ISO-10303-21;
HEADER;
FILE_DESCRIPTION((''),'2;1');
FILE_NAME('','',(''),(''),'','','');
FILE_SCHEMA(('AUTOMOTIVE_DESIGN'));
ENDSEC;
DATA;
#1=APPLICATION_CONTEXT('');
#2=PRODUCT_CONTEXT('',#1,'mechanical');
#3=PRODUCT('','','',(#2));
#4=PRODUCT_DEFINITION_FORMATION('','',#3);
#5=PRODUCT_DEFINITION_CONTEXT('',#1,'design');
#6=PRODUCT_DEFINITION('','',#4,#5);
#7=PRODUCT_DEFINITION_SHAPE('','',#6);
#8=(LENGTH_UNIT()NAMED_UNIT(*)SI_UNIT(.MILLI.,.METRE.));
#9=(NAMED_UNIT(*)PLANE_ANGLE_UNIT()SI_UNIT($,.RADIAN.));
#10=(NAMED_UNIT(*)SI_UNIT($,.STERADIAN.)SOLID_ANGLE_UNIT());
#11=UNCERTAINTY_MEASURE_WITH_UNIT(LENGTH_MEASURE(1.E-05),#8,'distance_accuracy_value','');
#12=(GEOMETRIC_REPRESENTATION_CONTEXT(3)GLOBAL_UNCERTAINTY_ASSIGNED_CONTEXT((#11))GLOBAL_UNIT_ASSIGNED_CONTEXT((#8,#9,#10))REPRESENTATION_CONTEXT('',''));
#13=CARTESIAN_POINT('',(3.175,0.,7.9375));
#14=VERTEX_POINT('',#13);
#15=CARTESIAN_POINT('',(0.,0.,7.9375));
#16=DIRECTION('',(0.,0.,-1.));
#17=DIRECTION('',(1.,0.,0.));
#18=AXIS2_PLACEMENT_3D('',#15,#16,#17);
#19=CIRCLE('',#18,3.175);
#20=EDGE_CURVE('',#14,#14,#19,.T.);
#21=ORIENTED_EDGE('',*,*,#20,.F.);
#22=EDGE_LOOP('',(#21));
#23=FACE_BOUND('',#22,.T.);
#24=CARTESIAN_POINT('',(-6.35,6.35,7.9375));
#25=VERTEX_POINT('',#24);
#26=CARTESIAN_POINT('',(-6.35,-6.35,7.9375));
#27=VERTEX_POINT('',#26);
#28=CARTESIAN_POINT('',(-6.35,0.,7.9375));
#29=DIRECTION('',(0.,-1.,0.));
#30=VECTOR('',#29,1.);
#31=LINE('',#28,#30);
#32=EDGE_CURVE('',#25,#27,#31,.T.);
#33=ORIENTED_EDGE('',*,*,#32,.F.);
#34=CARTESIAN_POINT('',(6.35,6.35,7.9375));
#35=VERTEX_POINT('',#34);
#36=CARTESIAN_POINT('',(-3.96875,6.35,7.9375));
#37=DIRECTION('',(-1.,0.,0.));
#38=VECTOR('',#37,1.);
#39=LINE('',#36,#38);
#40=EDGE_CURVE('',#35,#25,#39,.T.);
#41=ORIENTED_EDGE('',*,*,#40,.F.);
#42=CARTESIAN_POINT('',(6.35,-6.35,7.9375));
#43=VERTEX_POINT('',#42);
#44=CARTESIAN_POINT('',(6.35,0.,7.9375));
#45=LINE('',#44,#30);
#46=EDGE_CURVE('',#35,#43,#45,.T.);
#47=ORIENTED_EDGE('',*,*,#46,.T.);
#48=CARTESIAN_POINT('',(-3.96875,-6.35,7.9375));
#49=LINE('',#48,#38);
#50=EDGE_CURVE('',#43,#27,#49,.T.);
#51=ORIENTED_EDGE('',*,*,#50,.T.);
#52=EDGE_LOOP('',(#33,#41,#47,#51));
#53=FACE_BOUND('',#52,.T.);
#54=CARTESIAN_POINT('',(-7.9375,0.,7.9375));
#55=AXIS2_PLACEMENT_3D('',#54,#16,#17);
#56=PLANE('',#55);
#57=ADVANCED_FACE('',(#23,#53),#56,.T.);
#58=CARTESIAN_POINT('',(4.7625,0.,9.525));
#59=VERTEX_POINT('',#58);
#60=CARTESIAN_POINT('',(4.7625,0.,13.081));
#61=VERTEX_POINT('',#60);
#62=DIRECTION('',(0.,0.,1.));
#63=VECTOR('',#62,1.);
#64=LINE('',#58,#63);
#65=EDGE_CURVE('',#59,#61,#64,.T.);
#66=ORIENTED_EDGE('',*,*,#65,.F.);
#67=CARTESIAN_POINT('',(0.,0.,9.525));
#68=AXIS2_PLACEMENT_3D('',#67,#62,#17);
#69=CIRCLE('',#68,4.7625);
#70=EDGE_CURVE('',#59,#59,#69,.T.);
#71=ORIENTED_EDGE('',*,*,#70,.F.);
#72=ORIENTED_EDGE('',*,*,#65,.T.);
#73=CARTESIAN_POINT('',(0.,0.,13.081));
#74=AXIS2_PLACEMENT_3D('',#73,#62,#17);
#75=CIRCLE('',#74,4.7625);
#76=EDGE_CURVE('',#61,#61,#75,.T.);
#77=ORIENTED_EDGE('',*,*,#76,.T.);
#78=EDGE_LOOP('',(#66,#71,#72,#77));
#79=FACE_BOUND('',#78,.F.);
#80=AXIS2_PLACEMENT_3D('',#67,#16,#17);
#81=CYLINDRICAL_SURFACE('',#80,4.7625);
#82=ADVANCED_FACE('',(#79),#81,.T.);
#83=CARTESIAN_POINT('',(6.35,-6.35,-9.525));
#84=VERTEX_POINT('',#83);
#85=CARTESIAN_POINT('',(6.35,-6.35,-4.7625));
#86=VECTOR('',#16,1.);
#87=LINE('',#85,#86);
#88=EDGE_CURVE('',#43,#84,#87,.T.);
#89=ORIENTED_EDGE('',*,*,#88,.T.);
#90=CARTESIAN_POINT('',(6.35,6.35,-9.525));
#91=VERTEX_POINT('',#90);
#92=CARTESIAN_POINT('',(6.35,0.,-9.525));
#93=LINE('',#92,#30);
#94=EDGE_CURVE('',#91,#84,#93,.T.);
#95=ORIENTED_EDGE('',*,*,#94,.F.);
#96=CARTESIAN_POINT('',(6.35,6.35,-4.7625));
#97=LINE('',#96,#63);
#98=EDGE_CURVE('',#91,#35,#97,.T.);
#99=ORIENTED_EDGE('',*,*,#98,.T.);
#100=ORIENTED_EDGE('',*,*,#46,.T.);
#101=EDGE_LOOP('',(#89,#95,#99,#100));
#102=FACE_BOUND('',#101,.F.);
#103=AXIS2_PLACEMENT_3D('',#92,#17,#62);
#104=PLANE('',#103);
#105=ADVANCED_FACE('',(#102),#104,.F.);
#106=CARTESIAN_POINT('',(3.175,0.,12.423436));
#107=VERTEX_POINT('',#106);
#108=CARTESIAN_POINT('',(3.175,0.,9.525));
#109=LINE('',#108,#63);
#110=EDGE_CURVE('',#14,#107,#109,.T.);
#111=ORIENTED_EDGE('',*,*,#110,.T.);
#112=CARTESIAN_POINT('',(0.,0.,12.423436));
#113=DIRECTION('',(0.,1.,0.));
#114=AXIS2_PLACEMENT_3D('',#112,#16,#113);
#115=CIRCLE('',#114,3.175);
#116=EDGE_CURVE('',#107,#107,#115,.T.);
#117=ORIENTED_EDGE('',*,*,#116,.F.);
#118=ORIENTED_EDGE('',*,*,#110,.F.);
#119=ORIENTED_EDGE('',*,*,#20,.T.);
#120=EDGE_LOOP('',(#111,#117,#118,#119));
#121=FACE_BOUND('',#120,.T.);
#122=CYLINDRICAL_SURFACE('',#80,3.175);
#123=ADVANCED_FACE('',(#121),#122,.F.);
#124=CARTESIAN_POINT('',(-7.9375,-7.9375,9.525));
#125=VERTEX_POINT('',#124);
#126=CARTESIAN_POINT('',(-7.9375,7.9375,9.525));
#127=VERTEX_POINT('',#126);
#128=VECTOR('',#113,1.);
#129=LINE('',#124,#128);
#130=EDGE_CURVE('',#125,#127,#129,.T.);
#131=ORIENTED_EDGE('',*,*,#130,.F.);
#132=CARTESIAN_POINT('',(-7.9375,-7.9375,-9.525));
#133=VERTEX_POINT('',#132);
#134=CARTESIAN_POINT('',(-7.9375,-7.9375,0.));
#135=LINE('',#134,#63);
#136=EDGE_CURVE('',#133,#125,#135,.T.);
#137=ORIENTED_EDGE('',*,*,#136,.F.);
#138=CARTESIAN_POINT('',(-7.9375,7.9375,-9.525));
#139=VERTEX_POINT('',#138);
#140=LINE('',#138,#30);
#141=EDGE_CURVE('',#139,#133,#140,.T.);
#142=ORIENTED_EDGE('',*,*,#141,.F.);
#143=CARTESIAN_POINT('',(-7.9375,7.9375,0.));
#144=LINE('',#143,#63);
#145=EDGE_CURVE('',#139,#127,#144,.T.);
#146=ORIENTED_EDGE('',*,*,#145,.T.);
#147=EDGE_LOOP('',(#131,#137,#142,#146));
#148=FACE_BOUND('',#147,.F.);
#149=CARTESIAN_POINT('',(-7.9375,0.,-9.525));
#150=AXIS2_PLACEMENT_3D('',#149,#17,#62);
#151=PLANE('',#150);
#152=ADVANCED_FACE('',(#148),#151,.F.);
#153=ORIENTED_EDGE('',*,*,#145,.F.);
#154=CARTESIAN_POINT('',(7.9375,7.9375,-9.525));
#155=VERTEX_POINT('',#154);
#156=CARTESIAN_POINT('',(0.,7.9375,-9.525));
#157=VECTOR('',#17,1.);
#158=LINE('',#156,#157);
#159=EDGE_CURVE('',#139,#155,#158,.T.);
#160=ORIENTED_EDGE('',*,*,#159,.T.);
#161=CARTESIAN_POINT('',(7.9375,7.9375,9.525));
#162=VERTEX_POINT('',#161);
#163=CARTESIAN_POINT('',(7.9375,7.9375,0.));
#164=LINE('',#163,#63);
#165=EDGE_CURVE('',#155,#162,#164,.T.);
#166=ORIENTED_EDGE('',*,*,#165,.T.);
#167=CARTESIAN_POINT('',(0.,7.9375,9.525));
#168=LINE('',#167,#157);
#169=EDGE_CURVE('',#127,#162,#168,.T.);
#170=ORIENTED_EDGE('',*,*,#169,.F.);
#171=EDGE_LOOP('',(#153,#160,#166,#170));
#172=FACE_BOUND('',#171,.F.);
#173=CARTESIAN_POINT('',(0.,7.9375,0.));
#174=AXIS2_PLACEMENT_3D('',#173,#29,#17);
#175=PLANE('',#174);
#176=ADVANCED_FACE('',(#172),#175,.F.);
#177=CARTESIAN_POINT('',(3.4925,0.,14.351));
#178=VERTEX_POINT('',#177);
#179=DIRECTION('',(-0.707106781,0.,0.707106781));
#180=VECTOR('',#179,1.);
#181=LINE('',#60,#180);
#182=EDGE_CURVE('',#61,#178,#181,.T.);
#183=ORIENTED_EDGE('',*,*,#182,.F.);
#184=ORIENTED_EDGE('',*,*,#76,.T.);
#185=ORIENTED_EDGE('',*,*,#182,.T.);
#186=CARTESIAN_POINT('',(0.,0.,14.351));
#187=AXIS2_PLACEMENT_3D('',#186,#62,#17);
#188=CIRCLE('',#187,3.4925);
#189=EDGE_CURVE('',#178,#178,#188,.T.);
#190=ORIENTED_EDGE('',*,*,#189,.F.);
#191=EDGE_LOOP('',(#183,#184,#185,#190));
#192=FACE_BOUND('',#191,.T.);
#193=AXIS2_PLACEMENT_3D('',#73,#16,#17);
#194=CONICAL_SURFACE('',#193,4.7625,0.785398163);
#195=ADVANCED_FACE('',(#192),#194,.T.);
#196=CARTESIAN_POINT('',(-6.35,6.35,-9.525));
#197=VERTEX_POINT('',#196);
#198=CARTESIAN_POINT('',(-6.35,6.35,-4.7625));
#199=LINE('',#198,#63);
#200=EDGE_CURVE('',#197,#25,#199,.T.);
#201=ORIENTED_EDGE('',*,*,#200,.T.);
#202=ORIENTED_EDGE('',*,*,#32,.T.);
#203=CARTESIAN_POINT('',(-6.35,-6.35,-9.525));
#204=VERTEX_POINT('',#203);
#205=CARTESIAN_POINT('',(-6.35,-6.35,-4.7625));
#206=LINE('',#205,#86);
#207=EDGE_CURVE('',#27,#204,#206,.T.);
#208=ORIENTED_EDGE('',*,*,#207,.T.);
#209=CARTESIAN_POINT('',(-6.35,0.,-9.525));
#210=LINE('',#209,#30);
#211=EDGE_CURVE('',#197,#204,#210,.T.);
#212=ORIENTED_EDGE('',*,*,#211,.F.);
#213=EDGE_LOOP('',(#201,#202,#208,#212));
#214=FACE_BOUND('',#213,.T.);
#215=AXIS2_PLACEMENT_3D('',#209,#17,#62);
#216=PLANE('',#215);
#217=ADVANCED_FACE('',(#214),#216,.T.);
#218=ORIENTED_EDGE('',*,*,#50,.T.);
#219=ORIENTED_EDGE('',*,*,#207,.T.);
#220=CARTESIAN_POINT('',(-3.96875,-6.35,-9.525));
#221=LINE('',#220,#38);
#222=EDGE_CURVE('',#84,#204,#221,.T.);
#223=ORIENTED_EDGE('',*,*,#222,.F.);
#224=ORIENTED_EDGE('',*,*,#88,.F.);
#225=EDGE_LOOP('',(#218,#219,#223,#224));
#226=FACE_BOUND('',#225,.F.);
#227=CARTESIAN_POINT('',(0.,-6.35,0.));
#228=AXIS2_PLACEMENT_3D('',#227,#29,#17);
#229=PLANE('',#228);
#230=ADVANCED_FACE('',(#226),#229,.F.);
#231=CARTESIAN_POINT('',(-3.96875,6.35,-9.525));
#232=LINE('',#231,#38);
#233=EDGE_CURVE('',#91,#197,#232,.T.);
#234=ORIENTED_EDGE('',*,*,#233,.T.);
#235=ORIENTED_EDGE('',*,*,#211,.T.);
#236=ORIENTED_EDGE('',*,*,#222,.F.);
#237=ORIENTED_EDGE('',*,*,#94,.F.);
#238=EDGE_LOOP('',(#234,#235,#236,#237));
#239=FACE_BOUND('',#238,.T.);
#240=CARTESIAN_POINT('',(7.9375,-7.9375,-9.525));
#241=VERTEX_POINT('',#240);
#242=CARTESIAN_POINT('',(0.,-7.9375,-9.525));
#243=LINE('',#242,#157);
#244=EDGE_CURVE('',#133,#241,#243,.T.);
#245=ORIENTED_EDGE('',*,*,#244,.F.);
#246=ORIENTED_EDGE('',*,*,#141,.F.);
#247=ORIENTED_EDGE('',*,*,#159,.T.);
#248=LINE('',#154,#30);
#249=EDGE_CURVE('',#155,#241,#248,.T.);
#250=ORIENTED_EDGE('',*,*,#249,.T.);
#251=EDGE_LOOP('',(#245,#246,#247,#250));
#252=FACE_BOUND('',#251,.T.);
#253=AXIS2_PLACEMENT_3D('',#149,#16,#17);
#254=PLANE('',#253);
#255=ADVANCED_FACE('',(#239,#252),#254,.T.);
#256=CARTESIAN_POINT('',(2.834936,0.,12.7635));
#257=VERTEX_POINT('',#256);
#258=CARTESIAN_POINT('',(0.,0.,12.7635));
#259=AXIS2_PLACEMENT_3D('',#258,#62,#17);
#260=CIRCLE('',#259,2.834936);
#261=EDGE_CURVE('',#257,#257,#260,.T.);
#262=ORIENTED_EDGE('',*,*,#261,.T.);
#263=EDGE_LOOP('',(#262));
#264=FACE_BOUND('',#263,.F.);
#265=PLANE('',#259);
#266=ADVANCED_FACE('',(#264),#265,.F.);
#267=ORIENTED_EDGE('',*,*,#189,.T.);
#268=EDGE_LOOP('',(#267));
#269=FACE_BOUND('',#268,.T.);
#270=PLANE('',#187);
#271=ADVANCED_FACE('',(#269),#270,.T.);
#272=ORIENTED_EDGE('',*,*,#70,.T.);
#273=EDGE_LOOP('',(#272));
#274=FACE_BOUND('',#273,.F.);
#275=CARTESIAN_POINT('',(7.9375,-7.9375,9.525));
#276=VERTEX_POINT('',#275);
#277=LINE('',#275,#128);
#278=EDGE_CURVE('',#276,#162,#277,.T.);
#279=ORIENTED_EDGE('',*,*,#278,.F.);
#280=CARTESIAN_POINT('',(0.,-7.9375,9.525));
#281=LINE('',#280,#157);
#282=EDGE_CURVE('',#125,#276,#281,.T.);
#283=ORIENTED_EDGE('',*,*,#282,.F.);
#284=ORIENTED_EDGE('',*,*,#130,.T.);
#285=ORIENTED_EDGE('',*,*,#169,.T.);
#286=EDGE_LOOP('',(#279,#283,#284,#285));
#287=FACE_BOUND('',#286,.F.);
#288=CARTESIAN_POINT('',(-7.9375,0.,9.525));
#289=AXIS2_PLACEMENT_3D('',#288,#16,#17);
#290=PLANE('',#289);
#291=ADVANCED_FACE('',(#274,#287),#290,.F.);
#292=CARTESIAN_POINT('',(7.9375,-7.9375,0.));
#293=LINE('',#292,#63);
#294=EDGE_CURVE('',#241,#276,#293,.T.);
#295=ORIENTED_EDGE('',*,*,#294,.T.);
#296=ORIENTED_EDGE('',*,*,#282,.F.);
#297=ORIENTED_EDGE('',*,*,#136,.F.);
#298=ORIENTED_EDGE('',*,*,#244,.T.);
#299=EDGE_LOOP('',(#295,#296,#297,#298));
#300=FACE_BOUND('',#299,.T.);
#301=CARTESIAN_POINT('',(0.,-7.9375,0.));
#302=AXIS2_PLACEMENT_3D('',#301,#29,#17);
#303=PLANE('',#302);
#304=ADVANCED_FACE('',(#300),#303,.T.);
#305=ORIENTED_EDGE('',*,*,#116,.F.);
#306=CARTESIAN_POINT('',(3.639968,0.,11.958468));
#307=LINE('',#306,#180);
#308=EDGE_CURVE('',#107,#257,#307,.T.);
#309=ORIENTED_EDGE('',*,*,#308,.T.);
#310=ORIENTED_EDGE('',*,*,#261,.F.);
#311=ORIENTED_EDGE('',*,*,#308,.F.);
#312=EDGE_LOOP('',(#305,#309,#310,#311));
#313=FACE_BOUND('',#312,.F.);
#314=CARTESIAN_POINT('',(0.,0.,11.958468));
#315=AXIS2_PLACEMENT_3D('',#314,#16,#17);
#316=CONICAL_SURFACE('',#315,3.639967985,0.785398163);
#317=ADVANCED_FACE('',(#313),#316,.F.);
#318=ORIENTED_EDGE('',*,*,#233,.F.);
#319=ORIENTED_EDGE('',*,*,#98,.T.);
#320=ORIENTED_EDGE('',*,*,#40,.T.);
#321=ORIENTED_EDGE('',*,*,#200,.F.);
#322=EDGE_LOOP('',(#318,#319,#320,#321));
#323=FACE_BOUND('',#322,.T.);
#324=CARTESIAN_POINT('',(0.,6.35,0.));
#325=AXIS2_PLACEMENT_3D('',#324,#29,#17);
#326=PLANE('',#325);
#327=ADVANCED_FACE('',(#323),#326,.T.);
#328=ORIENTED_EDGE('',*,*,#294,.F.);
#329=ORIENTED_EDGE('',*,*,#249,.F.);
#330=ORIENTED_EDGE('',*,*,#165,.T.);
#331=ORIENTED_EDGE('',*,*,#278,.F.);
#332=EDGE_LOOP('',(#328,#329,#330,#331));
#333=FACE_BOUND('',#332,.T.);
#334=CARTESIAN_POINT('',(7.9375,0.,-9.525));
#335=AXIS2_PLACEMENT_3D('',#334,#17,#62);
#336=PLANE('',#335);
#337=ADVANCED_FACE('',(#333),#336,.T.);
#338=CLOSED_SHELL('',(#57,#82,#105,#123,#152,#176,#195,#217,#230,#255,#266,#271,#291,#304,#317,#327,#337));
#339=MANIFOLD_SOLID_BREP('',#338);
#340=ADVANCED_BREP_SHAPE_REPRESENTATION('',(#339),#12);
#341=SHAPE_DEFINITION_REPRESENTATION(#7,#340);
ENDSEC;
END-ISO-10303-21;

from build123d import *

# Parameters (mm, degrees)
F0_W     = 15.875
F0_H     = 19.05
F1_DEPTH = 7.9375
F2_R     = 4.7625
F3_DEPTH = 4.826
F4_SIZE  = 1.27
F5_T     = -1.5875


with BuildPart() as f1:
    # F0 (on Front) → F1 (new body, symmetric)
    with BuildSketch(Plane.XZ):
        Rectangle(F0_W, F0_H)
    extrude(amount=F1_DEPTH, both=True)

    # F2 (on face) → F3 (join)
    with BuildSketch(Plane.XY.offset(9.525)):
        Circle(F2_R)
    extrude(amount=F3_DEPTH)

    # F4
    f4_edges = [f1.edges().sort_by_distance(p)[0] for p in [
        (-4.7625, 0, 14.351),
    ]]
    chamfer(f4_edges, length=F4_SIZE)

    # F5
    f5_openings = [f1.faces().sort_by_distance(p)[0] for p in [
        (0, 0, -9.525),
    ]]
    offset(amount=F5_T, openings=f5_openings, kind=Kind.INTERSECTION)


solid = f1.part
